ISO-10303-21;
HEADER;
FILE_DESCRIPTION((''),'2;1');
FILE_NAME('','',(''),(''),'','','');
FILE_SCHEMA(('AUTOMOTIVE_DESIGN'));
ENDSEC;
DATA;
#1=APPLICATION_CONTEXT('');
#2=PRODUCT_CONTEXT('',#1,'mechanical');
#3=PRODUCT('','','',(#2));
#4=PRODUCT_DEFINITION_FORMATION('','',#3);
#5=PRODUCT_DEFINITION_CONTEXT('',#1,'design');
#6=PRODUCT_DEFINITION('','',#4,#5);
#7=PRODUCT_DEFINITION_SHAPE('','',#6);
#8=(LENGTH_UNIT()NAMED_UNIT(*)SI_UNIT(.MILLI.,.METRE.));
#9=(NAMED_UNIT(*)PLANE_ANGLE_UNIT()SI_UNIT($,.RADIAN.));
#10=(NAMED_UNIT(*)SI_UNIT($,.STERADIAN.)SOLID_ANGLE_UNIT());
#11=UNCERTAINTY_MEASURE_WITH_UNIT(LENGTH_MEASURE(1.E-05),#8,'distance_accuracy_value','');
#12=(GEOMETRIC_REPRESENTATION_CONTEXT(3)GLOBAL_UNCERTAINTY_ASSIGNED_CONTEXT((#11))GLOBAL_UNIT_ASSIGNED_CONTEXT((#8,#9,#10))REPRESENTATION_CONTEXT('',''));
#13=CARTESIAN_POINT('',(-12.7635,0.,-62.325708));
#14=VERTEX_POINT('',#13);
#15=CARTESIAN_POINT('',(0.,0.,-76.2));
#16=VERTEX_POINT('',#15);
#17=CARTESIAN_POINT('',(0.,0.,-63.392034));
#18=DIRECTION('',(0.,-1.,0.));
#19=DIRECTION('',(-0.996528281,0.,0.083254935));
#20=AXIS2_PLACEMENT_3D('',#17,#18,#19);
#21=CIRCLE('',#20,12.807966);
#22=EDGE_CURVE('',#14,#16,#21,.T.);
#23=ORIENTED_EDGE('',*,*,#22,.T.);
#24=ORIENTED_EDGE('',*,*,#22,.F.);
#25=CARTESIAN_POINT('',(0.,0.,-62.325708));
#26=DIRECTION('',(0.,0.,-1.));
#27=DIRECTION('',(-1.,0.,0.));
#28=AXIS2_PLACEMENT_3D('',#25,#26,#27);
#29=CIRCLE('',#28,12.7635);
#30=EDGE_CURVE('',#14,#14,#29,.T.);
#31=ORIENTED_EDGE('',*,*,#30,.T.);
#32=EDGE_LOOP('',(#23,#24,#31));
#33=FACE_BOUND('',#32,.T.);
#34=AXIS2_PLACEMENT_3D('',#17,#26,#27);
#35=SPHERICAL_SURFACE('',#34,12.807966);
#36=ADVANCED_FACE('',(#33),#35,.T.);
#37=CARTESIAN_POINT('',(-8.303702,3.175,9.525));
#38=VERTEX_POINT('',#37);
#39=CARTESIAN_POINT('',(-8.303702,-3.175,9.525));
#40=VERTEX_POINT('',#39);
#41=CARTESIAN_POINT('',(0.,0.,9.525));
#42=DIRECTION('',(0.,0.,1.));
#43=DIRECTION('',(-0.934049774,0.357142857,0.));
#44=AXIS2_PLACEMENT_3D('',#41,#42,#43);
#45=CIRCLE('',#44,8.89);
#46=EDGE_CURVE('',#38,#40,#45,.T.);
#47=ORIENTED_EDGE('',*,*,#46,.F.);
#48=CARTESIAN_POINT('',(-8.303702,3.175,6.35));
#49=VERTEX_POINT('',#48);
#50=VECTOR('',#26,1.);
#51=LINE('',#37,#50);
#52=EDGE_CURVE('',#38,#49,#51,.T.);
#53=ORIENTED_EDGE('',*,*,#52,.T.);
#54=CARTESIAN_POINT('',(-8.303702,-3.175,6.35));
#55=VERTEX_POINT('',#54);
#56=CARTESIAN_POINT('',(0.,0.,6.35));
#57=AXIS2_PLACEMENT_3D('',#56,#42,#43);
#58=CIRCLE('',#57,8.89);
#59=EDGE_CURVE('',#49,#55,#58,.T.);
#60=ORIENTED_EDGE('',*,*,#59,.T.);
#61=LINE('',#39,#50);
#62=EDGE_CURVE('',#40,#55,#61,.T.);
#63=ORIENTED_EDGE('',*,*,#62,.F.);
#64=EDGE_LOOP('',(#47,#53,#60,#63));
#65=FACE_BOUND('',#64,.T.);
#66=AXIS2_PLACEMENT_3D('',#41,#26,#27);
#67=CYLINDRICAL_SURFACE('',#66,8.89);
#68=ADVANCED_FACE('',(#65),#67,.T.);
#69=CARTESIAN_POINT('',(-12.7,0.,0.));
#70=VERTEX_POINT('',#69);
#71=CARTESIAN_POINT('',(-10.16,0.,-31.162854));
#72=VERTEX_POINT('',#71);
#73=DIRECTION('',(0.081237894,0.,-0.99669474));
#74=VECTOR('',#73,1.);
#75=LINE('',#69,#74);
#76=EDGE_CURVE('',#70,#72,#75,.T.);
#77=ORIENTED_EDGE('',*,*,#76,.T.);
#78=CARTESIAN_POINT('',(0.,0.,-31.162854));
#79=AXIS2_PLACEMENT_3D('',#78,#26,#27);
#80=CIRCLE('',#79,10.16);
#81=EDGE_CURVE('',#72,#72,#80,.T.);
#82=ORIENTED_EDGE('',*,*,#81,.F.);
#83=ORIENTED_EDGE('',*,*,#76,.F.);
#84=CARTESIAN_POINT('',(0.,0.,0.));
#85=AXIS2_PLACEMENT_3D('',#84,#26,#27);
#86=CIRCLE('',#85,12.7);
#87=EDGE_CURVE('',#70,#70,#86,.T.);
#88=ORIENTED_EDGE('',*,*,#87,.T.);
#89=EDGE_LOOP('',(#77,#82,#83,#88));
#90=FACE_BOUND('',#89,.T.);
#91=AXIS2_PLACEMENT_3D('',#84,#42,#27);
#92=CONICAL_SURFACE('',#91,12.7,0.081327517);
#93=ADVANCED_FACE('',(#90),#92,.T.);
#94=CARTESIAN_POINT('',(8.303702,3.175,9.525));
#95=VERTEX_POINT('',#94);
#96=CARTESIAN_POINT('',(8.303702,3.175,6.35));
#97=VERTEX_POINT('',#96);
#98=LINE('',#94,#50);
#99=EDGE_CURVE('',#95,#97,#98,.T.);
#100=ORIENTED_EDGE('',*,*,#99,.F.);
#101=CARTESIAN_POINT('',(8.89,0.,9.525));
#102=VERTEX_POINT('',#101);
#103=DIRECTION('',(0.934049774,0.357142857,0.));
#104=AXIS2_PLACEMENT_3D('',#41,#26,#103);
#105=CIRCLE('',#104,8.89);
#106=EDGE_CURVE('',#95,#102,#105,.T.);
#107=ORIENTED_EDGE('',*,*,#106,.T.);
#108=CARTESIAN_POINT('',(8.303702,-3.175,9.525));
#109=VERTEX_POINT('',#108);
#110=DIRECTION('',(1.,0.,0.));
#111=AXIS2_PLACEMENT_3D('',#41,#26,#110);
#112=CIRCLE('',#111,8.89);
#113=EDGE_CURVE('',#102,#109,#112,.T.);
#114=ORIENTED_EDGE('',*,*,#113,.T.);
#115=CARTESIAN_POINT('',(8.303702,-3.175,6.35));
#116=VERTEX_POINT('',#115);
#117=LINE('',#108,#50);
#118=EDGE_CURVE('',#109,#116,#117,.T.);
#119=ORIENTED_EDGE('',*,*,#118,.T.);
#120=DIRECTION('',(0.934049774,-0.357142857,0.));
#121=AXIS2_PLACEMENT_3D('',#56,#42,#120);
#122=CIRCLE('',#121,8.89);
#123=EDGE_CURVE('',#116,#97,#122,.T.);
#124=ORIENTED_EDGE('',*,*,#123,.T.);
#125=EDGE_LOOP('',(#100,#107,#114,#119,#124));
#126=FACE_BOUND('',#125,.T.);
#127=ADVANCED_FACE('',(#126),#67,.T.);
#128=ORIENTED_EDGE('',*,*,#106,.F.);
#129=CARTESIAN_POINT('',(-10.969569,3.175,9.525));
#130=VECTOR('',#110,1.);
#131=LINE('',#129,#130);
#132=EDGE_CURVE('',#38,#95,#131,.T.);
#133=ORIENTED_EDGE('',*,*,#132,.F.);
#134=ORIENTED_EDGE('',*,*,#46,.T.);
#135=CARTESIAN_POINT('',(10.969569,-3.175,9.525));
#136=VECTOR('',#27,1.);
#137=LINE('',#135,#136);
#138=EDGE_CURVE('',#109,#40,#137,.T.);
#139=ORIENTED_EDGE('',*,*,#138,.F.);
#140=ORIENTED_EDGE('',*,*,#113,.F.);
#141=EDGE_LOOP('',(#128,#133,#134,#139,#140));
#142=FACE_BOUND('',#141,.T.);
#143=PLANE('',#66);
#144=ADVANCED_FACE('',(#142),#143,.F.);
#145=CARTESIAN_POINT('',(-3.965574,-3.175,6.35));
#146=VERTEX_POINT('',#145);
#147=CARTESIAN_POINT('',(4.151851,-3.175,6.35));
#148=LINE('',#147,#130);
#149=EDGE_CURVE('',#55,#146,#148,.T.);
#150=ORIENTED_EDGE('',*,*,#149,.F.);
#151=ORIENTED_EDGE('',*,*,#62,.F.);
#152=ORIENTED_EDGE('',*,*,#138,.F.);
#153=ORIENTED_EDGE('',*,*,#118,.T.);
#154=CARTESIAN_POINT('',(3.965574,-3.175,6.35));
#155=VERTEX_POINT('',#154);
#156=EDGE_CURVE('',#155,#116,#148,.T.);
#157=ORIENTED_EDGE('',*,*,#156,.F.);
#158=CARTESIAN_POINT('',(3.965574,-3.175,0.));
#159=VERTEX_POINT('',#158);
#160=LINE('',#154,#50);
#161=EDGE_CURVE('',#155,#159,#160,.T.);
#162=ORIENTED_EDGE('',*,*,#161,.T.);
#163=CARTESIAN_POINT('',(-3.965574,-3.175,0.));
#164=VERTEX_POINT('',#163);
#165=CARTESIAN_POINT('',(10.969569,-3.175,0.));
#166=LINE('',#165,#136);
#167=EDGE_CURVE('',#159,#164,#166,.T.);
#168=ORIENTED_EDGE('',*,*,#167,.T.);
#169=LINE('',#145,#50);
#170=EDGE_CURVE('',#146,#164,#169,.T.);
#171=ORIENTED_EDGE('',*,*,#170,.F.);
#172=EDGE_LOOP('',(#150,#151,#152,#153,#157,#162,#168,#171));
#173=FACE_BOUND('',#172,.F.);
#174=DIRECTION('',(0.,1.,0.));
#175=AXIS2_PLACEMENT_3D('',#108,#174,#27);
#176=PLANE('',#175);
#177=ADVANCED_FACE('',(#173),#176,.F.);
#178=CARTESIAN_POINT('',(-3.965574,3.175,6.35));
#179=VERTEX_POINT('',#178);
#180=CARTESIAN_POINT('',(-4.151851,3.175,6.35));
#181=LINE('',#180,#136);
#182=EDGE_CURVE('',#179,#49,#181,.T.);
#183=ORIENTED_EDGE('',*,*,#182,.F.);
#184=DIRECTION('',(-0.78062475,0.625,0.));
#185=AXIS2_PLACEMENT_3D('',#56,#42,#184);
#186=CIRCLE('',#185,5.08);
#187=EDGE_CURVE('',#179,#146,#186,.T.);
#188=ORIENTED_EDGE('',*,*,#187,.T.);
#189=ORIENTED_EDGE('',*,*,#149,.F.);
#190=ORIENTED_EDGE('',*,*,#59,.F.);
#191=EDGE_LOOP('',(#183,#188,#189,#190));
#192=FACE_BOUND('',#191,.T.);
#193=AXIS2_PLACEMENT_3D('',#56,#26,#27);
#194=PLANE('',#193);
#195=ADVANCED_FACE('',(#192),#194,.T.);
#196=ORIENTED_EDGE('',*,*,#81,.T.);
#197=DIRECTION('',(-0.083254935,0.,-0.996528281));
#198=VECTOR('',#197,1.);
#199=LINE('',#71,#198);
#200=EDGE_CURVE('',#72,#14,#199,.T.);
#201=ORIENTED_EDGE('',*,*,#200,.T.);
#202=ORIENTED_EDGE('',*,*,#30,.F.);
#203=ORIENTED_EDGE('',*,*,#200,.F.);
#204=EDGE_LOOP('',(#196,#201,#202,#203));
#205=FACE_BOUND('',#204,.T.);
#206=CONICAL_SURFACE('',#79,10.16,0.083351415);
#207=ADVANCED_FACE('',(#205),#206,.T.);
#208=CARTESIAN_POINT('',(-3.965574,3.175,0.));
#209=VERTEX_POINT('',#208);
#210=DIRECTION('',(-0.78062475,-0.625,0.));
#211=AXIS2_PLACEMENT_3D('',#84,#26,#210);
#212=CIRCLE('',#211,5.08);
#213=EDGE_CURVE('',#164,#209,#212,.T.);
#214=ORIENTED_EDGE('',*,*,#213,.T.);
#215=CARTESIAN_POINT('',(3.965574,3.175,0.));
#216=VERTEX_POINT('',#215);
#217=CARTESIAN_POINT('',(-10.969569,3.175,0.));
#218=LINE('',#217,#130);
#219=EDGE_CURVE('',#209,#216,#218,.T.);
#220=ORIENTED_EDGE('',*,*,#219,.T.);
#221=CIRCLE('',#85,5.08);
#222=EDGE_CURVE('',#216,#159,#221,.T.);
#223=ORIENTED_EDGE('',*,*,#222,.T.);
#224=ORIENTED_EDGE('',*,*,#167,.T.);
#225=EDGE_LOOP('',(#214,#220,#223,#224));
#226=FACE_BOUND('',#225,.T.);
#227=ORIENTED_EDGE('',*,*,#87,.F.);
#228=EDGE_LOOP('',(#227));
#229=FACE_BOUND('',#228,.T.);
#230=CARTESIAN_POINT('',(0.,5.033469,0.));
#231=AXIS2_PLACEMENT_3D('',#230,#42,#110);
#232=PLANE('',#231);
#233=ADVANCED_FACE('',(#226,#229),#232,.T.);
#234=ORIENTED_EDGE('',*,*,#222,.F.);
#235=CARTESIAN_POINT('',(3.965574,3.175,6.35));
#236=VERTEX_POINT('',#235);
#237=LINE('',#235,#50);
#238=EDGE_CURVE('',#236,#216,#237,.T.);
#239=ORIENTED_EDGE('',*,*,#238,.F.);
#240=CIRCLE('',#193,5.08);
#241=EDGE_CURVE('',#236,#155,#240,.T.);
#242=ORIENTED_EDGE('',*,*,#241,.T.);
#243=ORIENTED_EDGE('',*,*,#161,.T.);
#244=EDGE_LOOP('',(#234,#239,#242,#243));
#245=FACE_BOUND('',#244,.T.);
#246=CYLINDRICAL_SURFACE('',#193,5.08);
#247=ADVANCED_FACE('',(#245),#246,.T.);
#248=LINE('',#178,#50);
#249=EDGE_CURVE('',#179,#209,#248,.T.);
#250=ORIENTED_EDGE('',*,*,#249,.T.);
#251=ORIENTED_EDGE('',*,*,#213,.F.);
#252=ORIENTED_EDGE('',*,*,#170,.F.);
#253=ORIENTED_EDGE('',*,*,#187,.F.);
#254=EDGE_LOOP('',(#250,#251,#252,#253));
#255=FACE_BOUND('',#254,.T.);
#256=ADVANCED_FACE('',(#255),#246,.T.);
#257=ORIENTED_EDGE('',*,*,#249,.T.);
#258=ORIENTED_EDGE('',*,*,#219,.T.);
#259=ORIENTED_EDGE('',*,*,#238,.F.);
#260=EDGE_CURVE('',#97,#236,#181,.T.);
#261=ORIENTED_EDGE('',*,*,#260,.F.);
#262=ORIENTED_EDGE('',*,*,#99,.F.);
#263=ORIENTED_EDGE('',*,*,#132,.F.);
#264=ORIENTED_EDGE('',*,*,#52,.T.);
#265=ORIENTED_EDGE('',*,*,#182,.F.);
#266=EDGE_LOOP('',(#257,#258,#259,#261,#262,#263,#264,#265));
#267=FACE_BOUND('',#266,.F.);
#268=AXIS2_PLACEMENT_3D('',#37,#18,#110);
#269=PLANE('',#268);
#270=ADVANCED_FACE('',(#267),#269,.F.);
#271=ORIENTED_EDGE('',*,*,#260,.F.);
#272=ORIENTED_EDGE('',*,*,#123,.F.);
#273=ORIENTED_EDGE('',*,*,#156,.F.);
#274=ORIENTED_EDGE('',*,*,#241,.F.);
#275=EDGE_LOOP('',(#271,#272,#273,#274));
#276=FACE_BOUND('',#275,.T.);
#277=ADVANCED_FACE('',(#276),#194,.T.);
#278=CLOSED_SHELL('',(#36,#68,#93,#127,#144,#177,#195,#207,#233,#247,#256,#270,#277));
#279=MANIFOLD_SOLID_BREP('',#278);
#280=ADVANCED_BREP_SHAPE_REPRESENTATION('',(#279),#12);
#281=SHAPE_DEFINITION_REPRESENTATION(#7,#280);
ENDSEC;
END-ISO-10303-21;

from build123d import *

# Parameters (mm, degrees)
F3_DEPTH = 9.525


with BuildPart() as f1:
    # F0 (on Front) → F1 (revolve)
    with BuildSketch(Plane.XZ):
        Polygon((0, -31.1628540011), (0, 0), (-5.08, 0), (-12.7, 0), (-10.16, -31.1628540011), align=None)
        Polygon((-5.08, 0), (0, 0), (0, 9.525), (-8.89, 9.525), (-8.89, 6.35), (-5.08, 6.35), align=None)
        Polygon((0, -62.3257080022), (0, -31.1628540011), (-10.16, -31.1628540011), (-12.7635, -62.3257080022), align=None)
        with BuildLine():
            Line((0, -76.2), (0, -62.3257080022))
            Line((0, -62.3257080022), (-12.7635, -62.3257080022))
            ThreePointArc((-12.7635, -62.3257080022), (-9.4260663944, -72.0634388747), (0, -76.2))
        make_face()
    revolve(axis=Axis((0, 0, -38.1), (0, 0, -1)))

    # F2 (on face) → F3 (cut, through all)
    with BuildSketch(Plane.XY.offset(9.525)):
        with BuildLine():
            ThreePointArc((8.3037024874, 3.175), (0, 8.89), (-8.3037024874, 3.175))
            Line((-8.3037024874, 3.175), (8.3037024874, 3.175))
        make_face()
        with BuildLine():
            Line((8.3037024874, -3.175), (-8.3037024874, -3.175))
            ThreePointArc((-8.3037024874, -3.175), (0, -8.89), (8.3037024874, -3.175))
        make_face()
        with BuildLine():
            ThreePointArc((10.9695693512, 3.175), (0, 11.4198107144), (-10.9695693512, 3.175))
            Line((-10.9695693512, 3.175), (-8.3037024874, 3.175))
            ThreePointArc((-8.3037024874, 3.175), (0, 8.89), (8.3037024874, 3.175))
            Line((8.3037024874, 3.175), (10.9695693512, 3.175))
        make_face()
        with BuildLine():
            Line((-8.3037024874, -3.175), (-10.9695693512, -3.175))
            ThreePointArc((-10.9695693512, -3.175), (0, -11.4198107144), (10.9695693512, -3.175))
            Line((10.9695693512, -3.175), (8.3037024874, -3.175))
            ThreePointArc((8.3037024874, -3.175), (0, -8.89), (-8.3037024874, -3.175))
        make_face()
        with BuildLine():
            Line((-8.3037024874, 3.175), (-10.9695693512, 3.175))
            ThreePointArc((-10.9695693512, 3.175), (-11.4198107144, 0), (-10.9695693512, -3.175))
            Line((-10.9695693512, -3.175), (-8.3037024874, -3.175))
            ThreePointArc((-8.3037024874, -3.175), (-8.89, 0), (-8.3037024874, 3.175))
        make_face()
        with BuildLine():
            ThreePointArc((11.4198107144, 0), (11.3066901072, 1.6033825405), (10.9695693512, 3.175))
            Line((10.9695693512, 3.175), (8.3037024874, 3.175))
            ThreePointArc((8.3037024874, 3.175), (8.7421969525, 1.6143396307), (8.89, 0))
            ThreePointArc((8.89, 0), (8.7421969525, -1.6143396307), (8.3037024874, -3.175))
            Line((8.3037024874, -3.175), (10.9695693512, -3.175))
            ThreePointArc((10.9695693512, -3.175), (11.3066901072, -1.6033825405), (11.4198107144, 0))
        make_face()
    extrude(amount=-F3_DEPTH, mode=Mode.SUBTRACT)


solid = f1.part
